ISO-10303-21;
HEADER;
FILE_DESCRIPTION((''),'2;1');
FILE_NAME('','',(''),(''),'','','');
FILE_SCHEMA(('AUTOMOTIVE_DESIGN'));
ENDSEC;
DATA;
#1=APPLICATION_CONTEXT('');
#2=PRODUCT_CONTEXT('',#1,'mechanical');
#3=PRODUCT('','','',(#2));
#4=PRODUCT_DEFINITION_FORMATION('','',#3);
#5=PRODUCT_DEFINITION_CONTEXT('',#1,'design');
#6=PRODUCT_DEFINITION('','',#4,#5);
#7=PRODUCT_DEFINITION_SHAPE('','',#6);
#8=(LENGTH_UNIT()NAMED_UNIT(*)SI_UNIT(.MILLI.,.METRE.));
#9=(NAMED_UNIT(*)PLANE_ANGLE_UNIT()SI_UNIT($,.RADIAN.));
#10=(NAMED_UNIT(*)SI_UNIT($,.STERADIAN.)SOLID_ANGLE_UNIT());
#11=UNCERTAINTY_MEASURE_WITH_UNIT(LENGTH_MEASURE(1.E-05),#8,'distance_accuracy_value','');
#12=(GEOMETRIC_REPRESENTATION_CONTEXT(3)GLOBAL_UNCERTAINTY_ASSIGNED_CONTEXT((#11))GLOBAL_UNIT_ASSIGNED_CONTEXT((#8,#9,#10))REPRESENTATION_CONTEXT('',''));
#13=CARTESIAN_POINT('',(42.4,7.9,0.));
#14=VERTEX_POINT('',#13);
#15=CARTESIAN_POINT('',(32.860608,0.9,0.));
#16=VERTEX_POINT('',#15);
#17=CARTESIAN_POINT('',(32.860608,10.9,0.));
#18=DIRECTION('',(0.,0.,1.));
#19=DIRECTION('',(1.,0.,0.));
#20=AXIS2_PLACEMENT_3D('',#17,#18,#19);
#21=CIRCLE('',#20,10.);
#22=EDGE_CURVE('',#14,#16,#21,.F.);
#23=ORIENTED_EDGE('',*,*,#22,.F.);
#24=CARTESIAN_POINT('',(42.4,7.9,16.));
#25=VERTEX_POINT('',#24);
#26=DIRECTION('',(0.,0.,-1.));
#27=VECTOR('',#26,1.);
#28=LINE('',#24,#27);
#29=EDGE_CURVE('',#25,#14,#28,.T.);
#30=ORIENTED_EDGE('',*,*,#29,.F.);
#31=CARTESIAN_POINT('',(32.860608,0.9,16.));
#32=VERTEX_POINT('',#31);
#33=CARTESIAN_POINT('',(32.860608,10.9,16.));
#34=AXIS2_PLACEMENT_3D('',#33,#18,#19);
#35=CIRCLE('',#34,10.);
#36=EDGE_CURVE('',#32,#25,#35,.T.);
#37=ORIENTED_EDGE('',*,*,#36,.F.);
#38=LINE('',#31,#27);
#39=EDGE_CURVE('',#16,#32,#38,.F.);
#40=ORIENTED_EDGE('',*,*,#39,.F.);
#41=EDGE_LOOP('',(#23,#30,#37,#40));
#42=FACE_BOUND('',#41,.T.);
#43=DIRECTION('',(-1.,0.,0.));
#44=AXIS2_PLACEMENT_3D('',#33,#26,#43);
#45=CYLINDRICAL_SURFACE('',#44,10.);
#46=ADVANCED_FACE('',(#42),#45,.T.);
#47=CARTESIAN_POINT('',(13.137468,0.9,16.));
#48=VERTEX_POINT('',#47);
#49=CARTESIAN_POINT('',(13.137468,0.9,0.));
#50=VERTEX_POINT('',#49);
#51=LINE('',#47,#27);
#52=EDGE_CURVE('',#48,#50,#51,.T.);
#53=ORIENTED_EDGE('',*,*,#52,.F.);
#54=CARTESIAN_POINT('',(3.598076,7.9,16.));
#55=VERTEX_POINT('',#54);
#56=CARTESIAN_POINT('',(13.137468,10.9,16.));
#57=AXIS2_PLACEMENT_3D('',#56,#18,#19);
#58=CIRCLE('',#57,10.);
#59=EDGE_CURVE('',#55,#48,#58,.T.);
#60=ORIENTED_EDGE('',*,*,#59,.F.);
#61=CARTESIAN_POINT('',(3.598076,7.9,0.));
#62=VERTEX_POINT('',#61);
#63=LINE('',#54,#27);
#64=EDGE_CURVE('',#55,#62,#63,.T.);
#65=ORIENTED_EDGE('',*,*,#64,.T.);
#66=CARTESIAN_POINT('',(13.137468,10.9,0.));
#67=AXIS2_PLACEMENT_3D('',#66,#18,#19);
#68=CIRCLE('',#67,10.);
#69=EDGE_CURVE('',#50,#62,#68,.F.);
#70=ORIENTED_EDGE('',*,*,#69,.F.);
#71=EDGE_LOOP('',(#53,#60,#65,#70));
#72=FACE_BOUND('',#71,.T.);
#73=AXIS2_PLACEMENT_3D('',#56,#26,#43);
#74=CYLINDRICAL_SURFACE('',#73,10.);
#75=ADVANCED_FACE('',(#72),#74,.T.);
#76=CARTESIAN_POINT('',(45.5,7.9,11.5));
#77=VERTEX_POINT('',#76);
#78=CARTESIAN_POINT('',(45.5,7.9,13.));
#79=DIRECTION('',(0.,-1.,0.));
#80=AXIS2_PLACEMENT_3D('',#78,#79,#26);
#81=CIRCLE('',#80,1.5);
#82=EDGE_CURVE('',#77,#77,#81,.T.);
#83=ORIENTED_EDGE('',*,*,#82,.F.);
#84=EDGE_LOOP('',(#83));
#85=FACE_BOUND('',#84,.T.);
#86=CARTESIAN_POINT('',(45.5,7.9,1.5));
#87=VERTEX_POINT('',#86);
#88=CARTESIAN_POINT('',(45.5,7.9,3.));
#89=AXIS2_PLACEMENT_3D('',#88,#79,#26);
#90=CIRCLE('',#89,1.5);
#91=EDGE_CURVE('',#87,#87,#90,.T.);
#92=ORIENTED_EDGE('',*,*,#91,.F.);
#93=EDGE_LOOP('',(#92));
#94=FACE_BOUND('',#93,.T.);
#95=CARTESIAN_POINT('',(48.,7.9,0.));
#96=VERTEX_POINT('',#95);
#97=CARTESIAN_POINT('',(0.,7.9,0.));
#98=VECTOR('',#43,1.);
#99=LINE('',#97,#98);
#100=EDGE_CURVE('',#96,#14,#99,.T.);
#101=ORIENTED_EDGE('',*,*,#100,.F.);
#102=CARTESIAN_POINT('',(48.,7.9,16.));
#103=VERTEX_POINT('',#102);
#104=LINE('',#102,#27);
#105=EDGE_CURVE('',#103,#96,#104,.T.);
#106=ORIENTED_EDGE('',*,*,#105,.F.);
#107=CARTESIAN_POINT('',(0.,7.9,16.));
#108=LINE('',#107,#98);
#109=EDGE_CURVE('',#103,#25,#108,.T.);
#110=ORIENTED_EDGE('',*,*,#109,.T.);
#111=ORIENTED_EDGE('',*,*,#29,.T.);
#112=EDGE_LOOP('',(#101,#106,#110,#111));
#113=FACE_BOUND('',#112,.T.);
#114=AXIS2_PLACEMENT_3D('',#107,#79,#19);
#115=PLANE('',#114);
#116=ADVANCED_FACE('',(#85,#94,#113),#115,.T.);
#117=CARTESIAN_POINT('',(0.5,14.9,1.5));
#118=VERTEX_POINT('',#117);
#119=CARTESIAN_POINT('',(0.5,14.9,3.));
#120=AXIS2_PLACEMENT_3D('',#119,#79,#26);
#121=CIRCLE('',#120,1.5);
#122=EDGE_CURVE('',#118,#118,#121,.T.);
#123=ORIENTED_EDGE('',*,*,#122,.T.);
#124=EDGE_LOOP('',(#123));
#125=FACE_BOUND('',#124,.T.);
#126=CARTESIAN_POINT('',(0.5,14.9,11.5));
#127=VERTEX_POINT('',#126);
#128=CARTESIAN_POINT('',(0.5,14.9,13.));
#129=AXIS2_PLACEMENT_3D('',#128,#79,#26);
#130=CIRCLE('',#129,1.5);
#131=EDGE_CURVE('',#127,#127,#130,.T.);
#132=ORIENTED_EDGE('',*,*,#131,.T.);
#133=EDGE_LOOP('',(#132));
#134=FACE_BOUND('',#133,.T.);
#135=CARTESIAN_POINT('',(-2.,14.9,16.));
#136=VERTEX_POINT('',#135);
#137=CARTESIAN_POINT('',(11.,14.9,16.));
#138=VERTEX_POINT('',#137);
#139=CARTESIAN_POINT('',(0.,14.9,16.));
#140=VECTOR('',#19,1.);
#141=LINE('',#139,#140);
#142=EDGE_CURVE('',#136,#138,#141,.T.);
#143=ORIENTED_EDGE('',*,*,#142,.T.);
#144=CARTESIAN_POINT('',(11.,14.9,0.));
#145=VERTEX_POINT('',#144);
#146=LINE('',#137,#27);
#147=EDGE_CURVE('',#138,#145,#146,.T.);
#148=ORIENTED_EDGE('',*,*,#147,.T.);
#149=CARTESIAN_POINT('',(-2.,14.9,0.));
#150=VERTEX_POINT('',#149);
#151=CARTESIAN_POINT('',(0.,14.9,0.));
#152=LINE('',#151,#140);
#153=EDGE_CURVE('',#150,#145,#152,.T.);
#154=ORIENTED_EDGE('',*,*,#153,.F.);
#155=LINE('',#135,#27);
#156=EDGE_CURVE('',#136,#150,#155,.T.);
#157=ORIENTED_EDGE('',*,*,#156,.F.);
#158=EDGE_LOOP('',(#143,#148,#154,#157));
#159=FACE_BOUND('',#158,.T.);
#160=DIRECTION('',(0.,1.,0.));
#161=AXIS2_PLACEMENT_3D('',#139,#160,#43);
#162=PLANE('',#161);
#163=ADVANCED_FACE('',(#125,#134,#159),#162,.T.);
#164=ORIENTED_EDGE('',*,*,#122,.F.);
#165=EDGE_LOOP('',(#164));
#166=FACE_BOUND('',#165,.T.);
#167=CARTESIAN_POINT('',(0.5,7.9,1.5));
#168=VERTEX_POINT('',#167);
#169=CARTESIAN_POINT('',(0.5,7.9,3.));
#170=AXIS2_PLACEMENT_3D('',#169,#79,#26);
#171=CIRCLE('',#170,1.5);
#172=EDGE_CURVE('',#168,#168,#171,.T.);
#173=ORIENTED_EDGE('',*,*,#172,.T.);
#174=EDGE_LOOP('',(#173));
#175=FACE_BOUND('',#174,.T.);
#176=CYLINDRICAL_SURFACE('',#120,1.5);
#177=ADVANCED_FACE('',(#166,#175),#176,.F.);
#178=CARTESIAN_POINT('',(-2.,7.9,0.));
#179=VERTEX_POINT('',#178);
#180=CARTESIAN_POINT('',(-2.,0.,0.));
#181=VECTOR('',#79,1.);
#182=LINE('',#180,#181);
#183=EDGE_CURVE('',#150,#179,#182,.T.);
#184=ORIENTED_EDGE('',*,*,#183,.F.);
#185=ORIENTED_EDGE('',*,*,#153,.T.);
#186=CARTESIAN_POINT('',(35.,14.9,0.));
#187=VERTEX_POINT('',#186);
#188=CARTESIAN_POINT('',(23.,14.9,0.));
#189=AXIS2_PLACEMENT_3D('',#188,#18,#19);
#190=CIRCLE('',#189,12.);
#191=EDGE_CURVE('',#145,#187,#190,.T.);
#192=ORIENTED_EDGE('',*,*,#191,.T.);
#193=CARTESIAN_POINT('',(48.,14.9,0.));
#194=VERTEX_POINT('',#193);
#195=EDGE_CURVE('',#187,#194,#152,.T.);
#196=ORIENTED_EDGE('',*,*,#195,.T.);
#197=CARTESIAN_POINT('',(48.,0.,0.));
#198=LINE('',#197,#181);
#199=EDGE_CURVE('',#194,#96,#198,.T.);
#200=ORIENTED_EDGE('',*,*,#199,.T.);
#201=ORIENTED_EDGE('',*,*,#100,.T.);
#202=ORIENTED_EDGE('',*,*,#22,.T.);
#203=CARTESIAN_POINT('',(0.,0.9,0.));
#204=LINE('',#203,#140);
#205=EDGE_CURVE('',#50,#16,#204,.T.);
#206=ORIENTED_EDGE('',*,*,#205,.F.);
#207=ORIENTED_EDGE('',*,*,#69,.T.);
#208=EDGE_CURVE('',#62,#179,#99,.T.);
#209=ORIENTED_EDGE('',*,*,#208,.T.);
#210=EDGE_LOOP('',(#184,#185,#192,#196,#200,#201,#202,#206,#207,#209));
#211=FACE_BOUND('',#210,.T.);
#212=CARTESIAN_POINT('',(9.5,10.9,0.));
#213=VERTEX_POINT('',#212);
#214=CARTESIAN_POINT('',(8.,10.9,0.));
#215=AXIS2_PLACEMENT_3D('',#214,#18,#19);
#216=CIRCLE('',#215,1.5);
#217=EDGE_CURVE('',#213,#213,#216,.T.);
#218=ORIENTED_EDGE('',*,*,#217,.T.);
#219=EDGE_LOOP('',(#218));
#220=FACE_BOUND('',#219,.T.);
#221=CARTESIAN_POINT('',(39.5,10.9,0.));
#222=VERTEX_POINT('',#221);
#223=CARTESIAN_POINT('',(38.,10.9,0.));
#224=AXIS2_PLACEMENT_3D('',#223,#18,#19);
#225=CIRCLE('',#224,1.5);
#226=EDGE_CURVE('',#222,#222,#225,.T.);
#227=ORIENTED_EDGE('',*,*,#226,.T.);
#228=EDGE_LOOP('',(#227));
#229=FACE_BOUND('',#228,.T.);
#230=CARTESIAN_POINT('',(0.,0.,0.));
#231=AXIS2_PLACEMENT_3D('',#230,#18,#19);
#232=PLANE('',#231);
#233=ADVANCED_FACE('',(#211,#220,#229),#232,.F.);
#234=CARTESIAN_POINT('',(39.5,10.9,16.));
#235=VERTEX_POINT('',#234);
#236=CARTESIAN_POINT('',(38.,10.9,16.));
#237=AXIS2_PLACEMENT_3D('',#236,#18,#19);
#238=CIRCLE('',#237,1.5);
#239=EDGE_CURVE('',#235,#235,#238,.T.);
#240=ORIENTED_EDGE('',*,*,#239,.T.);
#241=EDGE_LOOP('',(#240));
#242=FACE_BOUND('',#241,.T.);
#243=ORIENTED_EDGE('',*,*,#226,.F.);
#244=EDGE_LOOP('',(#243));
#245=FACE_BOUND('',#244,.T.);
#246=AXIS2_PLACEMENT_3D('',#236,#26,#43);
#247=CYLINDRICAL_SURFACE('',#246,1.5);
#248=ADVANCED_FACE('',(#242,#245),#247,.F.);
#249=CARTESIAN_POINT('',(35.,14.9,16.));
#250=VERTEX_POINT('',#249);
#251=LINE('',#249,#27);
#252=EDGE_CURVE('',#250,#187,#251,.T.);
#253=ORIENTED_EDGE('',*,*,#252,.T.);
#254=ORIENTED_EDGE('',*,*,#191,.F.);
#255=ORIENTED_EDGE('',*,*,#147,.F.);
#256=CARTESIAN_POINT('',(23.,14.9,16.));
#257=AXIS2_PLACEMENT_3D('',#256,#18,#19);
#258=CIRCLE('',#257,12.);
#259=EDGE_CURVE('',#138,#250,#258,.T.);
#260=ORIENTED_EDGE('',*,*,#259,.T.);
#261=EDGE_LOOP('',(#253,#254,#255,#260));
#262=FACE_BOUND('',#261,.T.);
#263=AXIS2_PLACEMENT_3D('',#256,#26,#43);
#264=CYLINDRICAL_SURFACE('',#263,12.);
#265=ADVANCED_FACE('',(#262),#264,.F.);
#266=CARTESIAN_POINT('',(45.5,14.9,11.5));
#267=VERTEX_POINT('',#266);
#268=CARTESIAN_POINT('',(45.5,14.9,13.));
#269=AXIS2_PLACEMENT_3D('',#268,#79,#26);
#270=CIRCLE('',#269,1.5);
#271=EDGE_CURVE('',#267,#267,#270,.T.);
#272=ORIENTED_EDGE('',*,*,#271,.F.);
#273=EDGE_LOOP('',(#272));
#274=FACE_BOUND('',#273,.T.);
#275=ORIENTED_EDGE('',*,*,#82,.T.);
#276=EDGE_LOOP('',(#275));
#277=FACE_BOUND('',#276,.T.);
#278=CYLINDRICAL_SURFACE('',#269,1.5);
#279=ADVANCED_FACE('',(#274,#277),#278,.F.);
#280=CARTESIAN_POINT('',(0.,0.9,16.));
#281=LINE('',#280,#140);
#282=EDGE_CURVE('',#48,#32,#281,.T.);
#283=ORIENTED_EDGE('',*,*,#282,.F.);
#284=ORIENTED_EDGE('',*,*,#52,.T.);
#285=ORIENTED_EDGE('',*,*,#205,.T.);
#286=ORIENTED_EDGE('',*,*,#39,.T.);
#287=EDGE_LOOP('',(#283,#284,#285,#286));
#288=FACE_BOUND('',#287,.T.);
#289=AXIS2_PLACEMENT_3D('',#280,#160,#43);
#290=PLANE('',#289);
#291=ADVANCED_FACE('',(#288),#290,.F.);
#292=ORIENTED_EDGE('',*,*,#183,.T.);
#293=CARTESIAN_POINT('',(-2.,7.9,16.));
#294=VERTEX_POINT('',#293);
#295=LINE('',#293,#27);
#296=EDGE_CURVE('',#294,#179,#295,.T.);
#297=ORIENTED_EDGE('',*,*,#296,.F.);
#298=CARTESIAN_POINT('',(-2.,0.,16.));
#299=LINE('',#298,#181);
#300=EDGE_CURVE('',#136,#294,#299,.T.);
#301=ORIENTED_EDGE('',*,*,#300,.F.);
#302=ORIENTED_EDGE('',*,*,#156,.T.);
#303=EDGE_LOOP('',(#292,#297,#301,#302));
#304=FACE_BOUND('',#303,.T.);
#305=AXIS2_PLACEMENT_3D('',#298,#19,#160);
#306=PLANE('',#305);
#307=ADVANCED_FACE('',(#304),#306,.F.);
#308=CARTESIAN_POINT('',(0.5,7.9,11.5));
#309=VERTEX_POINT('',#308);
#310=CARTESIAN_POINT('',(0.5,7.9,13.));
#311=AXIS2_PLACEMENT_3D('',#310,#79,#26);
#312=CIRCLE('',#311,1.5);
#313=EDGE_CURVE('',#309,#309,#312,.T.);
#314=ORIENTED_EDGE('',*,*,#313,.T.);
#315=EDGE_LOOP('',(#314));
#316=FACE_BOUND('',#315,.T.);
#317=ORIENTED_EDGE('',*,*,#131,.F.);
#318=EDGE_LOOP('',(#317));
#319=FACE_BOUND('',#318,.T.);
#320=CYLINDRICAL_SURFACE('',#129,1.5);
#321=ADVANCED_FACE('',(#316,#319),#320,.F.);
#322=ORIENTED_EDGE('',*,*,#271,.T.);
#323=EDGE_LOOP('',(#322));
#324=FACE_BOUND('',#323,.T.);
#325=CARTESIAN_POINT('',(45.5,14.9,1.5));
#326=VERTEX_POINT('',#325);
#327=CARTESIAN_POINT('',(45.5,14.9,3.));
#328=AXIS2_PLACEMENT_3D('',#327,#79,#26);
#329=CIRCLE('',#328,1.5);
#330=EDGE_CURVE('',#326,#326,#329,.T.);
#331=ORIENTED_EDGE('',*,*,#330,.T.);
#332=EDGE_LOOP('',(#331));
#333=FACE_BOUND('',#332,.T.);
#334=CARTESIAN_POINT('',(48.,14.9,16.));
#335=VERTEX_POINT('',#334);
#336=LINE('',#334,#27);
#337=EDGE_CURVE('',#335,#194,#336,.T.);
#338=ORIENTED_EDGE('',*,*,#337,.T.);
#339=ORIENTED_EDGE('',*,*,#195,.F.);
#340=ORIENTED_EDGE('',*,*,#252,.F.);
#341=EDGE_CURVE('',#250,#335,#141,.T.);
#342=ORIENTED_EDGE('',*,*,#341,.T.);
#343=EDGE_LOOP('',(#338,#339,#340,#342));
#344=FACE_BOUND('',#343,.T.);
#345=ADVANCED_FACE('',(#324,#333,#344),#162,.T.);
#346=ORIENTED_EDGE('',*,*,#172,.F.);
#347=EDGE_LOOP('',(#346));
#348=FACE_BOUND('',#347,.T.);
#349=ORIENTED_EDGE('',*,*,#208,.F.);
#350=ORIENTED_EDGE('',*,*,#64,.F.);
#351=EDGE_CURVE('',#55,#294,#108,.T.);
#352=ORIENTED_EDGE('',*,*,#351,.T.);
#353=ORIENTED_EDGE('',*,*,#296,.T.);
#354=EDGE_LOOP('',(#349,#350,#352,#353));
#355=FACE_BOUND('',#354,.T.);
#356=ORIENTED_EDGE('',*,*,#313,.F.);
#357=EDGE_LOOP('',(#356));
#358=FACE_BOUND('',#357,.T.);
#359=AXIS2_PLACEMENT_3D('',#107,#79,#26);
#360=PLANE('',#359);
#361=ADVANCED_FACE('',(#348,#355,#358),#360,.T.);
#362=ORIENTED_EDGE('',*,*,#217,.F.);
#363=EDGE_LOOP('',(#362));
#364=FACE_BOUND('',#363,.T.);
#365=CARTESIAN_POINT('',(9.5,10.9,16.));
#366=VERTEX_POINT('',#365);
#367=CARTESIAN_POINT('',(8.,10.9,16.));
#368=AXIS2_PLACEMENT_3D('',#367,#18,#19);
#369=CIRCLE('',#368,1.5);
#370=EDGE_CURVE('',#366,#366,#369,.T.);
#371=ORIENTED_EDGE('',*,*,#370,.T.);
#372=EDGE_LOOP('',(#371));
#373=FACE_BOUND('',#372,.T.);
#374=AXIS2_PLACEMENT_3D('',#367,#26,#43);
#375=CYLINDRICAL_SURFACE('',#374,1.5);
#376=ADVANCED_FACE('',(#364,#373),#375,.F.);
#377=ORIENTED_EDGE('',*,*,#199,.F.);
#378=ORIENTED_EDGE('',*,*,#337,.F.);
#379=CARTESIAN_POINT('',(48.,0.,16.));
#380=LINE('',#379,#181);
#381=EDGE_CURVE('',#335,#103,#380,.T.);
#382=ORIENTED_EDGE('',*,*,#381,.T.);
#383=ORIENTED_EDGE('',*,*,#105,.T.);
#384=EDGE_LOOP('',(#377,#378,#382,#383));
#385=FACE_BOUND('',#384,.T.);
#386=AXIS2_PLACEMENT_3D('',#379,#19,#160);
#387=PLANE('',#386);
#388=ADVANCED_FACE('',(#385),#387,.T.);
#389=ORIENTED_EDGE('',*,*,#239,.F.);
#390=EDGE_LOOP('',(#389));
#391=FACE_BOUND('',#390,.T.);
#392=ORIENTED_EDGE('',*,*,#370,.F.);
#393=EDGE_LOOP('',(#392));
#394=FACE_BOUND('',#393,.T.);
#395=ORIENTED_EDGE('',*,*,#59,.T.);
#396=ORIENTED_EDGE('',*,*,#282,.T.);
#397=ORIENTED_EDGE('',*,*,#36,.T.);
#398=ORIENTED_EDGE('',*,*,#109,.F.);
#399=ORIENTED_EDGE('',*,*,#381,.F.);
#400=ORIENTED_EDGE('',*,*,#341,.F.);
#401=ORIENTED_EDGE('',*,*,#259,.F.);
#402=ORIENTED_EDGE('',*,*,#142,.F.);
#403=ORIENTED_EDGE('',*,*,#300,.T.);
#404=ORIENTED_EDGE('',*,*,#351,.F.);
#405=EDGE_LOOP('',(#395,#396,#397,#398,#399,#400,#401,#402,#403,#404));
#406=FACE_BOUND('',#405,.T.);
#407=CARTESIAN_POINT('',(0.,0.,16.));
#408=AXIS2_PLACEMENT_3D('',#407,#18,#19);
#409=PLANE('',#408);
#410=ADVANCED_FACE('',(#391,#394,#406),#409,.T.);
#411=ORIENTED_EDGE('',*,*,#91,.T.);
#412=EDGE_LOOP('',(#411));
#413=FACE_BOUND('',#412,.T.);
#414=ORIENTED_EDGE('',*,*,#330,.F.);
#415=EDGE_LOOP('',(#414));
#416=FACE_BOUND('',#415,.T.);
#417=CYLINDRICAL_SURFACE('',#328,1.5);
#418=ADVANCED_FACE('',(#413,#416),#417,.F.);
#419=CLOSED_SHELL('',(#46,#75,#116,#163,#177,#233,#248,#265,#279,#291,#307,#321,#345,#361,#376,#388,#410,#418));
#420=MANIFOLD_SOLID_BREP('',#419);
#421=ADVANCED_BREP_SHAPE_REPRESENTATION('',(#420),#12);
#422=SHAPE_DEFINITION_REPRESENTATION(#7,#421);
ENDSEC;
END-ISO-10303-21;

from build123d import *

# Parameters (mm, degrees)
SKETCH7_R            = 1.5
BOSS_EXTRUDE11_DEPTH = 16
SKETCH8_R            = 1.5
CUT_EXTRUDE1_DEPTH   = 52.078371156
FILLET1_R            = 10


with BuildPart() as part:
    # Sketch7 → Boss-Extrude11 (new body)
    with BuildSketch(Plane.XY):
        with BuildLine():
            ThreePointArc((11, 14.9), (23, 2.9), (35, 14.9))
            Line((35, 14.9), (48, 14.9))
            Line((48, 14.9), (48, 7.9))
            Line((48, 7.9), (42.4, 7.9))
            Line((42.4, 7.9), (42.4, 0.9))
            Line((42.4, 0.9), (3.598076211, 0.9))
            Line((3.598076211, 0.9), (3.598076211, 7.9))
            Line((3.598076211, 7.9), (-2, 7.9))
            Line((-2, 7.9), (-2, 14.9))
            Line((-2, 14.9), (11, 14.9))
        make_face()
        with Locations((38, 10.9)):
            Circle(SKETCH7_R, mode=Mode.SUBTRACT)
        with Locations((8, 10.9)):
            Circle(SKETCH7_R, mode=Mode.SUBTRACT)
    extrude(amount=BOSS_EXTRUDE11_DEPTH)

    # Sketch8 → Cut-Extrude1 (cut, through all)
    with BuildSketch(Plane.XZ.offset(-7.9)):
        with Locations(Location((0.5, 13, 0), (0, 0, 270))):
            Circle(SKETCH8_R)
        with Locations(Location((45.5, 13, 0), (0, 0, 270))):
            Circle(SKETCH8_R)
        with Locations(Location((45.5, 3, 0), (0, 0, 270))):
            Circle(SKETCH8_R)
        with Locations(Location((0.5, 3, 0), (0, 0, 270))):
            Circle(SKETCH8_R)
    extrude(amount=-CUT_EXTRUDE1_DEPTH, mode=Mode.SUBTRACT)

    # Fillet1
    # the kernel refuses this fillet: 10 mm, written as the material it takes off along each edge
    with BuildSketch(Plane(origin=(3.598076211, 0.9, -23.848480035), x_dir=(1, 0, 0), z_dir=(0, 0, 1))) as fillet1_piece_1:
        with BuildLine():
            CenterArc((9.539392014, 10), FILLET1_R, 197.457603124, 72.542396876)
            Line((0, 7), (-0.19078784, 6.94))
            ThreePointArc((-0.19078784, 6.94), (-0.2, 3.5), (-0.2, 0))
            Line((-0.2, 0), (0, -0.2))
            Line((0, -0.2), (9.539392014, -0.2))
            Line((9.539392014, -0.2), (9.539392014, 0))
        make_face()
    extrude(amount=63.696960071, mode=Mode.SUBTRACT)
    with BuildSketch(Plane(origin=(42.4, 0.9, -23.848480035), x_dir=(0, 1, 0), z_dir=(0, 0, 1))) as fillet1_piece_2:
        with BuildLine():
            CenterArc((10, 9.539392014), FILLET1_R, 180, 72.542396876)
            Line((0, 9.539392014), (-0.2, 9.539392014))
            Line((-0.2, 9.539392014), (-0.2, 0))
            Line((-0.2, 0), (0, -0.2))
            ThreePointArc((0, -0.2), (3.5, -0.2), (6.94, -0.19078784))
            Line((6.94, -0.19078784), (7, 0))
        make_face()
    extrude(amount=63.696960071, mode=Mode.SUBTRACT)


solid = part.part
